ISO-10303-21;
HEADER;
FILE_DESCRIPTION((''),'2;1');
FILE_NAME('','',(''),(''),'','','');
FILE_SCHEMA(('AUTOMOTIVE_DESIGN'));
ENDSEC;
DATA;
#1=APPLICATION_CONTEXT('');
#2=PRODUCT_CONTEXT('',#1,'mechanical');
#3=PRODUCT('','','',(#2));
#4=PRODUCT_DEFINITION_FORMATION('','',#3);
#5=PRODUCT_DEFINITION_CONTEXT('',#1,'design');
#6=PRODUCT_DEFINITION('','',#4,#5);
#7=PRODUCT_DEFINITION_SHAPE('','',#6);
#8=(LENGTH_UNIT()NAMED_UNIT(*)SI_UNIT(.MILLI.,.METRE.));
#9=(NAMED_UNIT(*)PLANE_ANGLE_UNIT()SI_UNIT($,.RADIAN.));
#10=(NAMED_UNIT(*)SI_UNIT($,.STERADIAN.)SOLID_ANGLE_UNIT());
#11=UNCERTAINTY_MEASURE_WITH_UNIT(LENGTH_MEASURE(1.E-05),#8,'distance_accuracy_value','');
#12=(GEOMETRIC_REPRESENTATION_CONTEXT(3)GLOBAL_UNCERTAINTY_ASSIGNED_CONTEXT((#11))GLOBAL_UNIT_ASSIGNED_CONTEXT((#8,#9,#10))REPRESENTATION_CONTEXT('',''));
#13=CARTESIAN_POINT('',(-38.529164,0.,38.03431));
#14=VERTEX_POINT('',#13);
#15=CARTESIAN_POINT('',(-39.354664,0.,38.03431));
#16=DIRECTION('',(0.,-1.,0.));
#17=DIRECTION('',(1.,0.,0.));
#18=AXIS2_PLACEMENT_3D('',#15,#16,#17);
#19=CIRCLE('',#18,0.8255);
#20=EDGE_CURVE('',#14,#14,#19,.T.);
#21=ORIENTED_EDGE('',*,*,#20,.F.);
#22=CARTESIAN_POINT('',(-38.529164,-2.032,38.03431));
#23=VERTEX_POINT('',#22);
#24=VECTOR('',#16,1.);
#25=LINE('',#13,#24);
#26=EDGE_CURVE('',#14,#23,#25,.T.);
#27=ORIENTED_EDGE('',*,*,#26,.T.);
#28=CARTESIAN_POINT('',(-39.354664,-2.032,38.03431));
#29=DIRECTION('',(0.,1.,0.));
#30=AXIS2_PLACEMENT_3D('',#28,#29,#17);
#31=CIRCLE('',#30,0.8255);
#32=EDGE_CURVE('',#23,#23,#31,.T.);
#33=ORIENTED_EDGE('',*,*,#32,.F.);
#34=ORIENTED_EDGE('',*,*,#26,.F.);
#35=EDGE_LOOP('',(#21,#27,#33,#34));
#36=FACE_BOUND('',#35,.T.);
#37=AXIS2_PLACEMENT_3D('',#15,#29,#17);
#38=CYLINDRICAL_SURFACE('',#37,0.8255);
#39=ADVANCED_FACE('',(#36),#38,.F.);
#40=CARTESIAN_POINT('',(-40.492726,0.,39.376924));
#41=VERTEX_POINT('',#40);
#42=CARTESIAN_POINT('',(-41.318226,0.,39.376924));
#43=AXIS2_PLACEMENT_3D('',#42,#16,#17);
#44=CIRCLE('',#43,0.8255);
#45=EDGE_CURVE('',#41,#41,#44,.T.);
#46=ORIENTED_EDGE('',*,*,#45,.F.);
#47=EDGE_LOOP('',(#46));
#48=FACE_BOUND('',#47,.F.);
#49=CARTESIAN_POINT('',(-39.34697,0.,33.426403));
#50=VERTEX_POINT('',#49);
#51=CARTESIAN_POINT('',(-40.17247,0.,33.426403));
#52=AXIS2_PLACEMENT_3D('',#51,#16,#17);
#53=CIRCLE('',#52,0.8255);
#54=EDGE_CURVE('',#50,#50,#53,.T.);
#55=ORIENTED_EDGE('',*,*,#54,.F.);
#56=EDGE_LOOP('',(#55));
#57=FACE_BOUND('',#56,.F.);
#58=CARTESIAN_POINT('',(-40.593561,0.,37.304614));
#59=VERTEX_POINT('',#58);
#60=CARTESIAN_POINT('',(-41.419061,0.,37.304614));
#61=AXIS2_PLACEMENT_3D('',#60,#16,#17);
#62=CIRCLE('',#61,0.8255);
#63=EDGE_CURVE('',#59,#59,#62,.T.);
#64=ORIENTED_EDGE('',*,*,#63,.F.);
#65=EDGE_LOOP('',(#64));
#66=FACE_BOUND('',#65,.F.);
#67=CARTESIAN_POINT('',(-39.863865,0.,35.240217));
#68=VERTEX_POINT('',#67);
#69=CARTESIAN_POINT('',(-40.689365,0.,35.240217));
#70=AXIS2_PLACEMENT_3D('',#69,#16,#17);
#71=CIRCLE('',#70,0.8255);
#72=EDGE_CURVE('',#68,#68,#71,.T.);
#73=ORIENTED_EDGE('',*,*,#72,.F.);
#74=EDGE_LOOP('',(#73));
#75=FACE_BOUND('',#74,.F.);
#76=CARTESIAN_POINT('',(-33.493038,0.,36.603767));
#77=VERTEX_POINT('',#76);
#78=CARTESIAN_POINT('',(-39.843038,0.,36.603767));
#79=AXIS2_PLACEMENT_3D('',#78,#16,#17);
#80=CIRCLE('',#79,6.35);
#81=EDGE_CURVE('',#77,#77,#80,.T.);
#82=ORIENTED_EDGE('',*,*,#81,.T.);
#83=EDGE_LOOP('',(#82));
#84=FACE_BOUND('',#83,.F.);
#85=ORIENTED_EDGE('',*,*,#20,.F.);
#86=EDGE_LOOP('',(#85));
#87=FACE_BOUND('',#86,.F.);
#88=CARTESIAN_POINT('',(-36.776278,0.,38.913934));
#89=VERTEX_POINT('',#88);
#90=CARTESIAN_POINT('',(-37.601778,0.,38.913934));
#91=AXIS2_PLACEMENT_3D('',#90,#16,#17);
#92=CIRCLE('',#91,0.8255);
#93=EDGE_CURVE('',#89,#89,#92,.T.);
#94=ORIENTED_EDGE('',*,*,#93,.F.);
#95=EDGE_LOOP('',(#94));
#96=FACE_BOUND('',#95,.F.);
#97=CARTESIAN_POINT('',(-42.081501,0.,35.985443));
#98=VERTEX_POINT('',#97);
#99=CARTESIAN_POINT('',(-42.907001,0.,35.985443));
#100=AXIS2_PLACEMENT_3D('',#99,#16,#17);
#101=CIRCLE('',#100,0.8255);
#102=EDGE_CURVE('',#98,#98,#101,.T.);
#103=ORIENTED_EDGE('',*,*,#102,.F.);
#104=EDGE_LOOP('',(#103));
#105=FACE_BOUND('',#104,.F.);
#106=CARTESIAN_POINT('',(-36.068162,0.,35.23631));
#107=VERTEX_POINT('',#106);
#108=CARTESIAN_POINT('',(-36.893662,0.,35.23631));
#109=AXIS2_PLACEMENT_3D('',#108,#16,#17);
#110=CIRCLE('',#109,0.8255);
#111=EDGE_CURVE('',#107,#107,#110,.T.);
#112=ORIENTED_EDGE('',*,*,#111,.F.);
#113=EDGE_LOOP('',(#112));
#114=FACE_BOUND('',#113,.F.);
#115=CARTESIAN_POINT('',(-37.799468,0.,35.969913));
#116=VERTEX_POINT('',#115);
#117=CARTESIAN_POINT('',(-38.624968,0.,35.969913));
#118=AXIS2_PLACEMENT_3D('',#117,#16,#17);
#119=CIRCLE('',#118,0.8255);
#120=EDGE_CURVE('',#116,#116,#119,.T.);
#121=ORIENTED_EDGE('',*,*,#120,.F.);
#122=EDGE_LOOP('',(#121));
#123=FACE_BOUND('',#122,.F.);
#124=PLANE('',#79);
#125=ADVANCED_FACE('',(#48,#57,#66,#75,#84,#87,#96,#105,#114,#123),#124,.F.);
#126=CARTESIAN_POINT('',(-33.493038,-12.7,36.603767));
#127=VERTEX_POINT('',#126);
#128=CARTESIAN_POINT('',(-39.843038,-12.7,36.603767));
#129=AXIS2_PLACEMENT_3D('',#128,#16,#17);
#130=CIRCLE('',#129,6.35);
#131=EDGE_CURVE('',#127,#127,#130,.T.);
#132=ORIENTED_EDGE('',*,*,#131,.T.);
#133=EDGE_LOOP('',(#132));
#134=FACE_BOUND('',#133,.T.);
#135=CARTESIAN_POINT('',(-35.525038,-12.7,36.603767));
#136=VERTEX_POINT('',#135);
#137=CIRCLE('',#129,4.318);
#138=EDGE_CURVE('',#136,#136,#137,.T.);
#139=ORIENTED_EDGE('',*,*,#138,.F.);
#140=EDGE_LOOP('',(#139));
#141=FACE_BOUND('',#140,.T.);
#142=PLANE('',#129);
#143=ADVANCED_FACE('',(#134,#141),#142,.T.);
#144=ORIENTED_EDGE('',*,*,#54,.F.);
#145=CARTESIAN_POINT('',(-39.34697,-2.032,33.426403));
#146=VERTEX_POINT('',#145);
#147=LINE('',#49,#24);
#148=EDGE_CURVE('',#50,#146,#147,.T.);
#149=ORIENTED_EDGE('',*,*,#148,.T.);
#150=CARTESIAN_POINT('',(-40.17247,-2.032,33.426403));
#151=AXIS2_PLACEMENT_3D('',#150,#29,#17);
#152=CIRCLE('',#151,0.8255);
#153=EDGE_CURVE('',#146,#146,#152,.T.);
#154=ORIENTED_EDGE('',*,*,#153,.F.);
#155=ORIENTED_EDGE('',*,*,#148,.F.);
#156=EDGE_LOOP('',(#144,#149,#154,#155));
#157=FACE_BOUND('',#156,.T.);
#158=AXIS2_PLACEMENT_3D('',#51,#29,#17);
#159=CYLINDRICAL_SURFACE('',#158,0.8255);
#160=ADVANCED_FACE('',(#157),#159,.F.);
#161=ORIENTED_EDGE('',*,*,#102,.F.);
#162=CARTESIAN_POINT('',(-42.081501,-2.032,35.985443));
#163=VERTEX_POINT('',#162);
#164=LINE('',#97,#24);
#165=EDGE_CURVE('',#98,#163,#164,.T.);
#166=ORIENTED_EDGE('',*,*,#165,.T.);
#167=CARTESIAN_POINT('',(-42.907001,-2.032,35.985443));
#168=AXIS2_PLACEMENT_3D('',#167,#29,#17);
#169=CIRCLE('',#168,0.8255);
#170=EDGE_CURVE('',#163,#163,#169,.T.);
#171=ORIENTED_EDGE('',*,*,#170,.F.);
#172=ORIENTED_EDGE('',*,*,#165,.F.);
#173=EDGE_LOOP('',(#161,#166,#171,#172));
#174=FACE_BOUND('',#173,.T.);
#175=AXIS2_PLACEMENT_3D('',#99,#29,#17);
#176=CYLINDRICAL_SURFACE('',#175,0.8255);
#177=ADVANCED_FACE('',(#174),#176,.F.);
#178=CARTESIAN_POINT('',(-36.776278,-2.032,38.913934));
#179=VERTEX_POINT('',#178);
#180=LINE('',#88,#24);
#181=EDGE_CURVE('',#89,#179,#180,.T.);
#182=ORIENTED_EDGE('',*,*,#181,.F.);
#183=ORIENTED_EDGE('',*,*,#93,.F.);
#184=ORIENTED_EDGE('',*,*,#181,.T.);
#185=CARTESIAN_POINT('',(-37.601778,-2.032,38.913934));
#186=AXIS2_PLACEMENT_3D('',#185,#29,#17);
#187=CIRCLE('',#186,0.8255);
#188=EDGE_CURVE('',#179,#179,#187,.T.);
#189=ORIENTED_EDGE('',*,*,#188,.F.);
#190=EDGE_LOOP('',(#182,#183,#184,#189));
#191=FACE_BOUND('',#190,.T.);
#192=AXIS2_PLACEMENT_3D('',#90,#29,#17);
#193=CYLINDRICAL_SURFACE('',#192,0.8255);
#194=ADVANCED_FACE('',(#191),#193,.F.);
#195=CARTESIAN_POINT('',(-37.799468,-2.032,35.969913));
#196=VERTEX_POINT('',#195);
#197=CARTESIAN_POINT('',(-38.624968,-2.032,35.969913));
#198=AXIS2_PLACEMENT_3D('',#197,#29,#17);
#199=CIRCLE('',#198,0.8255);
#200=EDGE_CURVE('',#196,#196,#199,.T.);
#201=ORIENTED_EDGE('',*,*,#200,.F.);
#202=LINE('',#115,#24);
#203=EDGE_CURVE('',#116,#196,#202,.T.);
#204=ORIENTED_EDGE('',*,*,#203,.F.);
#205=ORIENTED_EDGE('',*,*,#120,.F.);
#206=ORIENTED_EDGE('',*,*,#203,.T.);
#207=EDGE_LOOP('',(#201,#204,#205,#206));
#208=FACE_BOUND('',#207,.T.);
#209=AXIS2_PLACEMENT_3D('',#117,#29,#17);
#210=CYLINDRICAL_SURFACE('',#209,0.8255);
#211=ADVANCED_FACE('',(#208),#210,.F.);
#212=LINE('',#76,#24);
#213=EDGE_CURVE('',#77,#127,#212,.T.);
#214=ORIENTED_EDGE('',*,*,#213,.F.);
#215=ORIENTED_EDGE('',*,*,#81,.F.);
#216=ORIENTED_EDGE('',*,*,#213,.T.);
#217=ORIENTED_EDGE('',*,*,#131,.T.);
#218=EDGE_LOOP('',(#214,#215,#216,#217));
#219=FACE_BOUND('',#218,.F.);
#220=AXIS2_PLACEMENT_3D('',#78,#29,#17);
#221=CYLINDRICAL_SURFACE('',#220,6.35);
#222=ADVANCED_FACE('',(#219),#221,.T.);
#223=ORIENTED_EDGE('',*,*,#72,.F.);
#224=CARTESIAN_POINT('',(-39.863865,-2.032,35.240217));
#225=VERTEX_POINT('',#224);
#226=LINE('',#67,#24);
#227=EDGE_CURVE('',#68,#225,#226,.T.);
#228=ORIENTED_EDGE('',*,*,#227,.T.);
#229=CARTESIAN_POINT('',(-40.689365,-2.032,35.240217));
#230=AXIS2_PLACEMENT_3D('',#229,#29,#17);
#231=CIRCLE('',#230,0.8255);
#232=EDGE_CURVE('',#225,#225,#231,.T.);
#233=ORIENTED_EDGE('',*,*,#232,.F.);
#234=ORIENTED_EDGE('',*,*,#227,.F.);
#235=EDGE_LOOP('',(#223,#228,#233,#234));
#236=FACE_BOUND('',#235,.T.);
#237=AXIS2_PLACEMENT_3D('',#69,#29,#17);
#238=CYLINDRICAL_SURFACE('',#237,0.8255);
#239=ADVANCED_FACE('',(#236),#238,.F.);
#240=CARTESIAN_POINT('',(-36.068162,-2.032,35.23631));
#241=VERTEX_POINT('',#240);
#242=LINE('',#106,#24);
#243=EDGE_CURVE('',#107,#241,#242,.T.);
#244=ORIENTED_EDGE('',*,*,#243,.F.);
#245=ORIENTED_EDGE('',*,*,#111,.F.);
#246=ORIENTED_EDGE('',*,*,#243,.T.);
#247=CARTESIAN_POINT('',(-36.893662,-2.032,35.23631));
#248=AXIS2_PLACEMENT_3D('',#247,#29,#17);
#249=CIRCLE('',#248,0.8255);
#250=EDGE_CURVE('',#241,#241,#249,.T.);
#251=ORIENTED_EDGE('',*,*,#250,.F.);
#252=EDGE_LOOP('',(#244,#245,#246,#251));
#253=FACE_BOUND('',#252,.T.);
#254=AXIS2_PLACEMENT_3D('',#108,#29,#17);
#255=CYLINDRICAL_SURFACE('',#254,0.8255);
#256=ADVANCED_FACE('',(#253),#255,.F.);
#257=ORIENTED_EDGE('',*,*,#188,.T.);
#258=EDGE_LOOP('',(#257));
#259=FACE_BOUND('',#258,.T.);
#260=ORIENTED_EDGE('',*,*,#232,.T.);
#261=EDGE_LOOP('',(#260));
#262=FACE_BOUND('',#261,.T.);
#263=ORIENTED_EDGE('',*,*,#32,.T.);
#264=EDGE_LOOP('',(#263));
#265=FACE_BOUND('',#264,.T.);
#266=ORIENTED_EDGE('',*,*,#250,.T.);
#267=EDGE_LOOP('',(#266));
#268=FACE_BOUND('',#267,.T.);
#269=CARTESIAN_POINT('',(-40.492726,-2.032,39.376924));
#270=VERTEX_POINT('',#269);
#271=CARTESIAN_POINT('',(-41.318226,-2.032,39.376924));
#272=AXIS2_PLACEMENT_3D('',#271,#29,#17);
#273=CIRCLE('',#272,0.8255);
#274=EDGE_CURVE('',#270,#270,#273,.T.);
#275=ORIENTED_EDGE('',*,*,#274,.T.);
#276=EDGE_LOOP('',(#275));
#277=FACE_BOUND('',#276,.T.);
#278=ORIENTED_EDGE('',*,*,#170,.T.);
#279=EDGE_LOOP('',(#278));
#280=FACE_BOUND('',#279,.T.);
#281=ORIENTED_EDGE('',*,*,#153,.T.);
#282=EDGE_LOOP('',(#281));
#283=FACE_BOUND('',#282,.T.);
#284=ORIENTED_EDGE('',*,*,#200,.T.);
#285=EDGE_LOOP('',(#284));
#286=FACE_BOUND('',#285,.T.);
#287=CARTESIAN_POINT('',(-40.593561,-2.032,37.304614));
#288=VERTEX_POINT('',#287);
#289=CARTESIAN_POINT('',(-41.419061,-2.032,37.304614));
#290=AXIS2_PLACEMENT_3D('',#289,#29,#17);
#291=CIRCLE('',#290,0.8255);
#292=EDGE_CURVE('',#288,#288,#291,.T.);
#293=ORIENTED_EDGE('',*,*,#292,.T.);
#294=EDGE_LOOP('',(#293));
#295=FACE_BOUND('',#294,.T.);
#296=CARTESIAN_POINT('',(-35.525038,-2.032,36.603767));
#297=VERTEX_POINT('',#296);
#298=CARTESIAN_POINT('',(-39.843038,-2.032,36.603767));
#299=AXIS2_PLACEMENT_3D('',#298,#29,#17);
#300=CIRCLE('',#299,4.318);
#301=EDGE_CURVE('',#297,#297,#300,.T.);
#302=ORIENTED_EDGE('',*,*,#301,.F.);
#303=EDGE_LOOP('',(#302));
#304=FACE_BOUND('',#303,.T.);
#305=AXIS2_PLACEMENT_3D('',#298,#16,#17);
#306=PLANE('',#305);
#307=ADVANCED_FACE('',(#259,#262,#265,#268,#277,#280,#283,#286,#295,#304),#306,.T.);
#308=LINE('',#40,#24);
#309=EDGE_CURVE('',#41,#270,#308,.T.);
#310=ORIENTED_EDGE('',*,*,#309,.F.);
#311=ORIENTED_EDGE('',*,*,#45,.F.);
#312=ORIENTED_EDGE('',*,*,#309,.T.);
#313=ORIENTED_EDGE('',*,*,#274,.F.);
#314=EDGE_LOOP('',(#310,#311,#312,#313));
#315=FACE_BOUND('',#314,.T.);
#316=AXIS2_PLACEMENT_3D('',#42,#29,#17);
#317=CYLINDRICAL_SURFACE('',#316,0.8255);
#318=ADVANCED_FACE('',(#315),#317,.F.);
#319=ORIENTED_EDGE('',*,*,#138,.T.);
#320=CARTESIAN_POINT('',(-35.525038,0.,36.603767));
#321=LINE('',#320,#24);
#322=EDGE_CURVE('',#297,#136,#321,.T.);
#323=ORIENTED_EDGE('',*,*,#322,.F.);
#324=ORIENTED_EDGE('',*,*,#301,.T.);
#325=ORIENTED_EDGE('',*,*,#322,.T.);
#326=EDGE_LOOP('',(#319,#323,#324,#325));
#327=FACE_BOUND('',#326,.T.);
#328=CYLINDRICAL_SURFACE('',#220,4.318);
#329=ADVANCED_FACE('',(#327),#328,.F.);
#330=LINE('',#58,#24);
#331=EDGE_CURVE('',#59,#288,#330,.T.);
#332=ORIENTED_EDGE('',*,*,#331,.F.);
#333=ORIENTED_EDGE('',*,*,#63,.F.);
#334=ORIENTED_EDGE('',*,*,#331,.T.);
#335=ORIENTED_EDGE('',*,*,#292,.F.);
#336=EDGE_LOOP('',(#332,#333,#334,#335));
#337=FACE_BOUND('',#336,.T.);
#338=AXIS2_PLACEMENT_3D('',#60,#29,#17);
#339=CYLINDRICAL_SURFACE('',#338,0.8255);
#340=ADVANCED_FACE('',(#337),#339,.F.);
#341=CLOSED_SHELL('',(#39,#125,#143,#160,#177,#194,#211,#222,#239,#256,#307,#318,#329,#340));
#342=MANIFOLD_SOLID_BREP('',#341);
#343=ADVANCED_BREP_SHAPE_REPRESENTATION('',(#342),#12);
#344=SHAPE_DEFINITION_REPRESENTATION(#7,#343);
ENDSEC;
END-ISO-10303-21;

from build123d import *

# Parameters (mm, degrees)
F0_R     = 6.35
F1_DEPTH = 12.7
F2_T     = -2.032
F3_R     = 0.8255
F4_DEPTH = 25.4
F5_R     = 0.8255
F6_DEPTH = 25.4


# Not quite as in the source:
# - a feature names something its author has since deleted; it is built from what else it names


with BuildPart() as f1:
    # F0 (on Front) → F1 (new body)
    with BuildSketch(Plane.XZ):
        with Locations((-39.8430377245, 36.6037674248)):
            Circle(F0_R)
    extrude(amount=F1_DEPTH)

    # F2
    f2_openings = [f1.faces().sort_by_distance(p)[0] for p in [
        (-39.843038, -12.7, 36.603767),
    ]]
    offset(amount=F2_T, openings=f2_openings)

    # F3 (on Front) → F4 (cut)
    with BuildSketch(Plane.XZ):
        with Locations((-40.1724703283, 33.4264033846)):
            Circle(F3_R)
        with Locations((-42.9070014867, 35.9854433805)):
            Circle(F3_R)
        with Locations((-41.3182264228, 39.3769239056)):
            Circle(F3_R)
        with Locations((-37.6017782744, 38.9139341465)):
            Circle(F3_R)
        with Locations((-36.8936620653, 35.2363102138)):
            Circle(F3_R)
    extrude(amount=F4_DEPTH, mode=Mode.SUBTRACT)

    # F5 (on Front) → F6 (cut)
    with BuildSketch(Plane.XZ):
        with Locations((-38.6249683797, 35.9699130058)):
            Circle(F5_R)
        with Locations((-39.3546639971, 38.0343095379)):
            Circle(F5_R)
        with Locations((-41.4190605292, 37.3046139206)):
            Circle(F5_R)
        with Locations((-40.6893649118, 35.2402173885)):
            Circle(F5_R)
    extrude(amount=F6_DEPTH, mode=Mode.SUBTRACT)


solid = f1.part
